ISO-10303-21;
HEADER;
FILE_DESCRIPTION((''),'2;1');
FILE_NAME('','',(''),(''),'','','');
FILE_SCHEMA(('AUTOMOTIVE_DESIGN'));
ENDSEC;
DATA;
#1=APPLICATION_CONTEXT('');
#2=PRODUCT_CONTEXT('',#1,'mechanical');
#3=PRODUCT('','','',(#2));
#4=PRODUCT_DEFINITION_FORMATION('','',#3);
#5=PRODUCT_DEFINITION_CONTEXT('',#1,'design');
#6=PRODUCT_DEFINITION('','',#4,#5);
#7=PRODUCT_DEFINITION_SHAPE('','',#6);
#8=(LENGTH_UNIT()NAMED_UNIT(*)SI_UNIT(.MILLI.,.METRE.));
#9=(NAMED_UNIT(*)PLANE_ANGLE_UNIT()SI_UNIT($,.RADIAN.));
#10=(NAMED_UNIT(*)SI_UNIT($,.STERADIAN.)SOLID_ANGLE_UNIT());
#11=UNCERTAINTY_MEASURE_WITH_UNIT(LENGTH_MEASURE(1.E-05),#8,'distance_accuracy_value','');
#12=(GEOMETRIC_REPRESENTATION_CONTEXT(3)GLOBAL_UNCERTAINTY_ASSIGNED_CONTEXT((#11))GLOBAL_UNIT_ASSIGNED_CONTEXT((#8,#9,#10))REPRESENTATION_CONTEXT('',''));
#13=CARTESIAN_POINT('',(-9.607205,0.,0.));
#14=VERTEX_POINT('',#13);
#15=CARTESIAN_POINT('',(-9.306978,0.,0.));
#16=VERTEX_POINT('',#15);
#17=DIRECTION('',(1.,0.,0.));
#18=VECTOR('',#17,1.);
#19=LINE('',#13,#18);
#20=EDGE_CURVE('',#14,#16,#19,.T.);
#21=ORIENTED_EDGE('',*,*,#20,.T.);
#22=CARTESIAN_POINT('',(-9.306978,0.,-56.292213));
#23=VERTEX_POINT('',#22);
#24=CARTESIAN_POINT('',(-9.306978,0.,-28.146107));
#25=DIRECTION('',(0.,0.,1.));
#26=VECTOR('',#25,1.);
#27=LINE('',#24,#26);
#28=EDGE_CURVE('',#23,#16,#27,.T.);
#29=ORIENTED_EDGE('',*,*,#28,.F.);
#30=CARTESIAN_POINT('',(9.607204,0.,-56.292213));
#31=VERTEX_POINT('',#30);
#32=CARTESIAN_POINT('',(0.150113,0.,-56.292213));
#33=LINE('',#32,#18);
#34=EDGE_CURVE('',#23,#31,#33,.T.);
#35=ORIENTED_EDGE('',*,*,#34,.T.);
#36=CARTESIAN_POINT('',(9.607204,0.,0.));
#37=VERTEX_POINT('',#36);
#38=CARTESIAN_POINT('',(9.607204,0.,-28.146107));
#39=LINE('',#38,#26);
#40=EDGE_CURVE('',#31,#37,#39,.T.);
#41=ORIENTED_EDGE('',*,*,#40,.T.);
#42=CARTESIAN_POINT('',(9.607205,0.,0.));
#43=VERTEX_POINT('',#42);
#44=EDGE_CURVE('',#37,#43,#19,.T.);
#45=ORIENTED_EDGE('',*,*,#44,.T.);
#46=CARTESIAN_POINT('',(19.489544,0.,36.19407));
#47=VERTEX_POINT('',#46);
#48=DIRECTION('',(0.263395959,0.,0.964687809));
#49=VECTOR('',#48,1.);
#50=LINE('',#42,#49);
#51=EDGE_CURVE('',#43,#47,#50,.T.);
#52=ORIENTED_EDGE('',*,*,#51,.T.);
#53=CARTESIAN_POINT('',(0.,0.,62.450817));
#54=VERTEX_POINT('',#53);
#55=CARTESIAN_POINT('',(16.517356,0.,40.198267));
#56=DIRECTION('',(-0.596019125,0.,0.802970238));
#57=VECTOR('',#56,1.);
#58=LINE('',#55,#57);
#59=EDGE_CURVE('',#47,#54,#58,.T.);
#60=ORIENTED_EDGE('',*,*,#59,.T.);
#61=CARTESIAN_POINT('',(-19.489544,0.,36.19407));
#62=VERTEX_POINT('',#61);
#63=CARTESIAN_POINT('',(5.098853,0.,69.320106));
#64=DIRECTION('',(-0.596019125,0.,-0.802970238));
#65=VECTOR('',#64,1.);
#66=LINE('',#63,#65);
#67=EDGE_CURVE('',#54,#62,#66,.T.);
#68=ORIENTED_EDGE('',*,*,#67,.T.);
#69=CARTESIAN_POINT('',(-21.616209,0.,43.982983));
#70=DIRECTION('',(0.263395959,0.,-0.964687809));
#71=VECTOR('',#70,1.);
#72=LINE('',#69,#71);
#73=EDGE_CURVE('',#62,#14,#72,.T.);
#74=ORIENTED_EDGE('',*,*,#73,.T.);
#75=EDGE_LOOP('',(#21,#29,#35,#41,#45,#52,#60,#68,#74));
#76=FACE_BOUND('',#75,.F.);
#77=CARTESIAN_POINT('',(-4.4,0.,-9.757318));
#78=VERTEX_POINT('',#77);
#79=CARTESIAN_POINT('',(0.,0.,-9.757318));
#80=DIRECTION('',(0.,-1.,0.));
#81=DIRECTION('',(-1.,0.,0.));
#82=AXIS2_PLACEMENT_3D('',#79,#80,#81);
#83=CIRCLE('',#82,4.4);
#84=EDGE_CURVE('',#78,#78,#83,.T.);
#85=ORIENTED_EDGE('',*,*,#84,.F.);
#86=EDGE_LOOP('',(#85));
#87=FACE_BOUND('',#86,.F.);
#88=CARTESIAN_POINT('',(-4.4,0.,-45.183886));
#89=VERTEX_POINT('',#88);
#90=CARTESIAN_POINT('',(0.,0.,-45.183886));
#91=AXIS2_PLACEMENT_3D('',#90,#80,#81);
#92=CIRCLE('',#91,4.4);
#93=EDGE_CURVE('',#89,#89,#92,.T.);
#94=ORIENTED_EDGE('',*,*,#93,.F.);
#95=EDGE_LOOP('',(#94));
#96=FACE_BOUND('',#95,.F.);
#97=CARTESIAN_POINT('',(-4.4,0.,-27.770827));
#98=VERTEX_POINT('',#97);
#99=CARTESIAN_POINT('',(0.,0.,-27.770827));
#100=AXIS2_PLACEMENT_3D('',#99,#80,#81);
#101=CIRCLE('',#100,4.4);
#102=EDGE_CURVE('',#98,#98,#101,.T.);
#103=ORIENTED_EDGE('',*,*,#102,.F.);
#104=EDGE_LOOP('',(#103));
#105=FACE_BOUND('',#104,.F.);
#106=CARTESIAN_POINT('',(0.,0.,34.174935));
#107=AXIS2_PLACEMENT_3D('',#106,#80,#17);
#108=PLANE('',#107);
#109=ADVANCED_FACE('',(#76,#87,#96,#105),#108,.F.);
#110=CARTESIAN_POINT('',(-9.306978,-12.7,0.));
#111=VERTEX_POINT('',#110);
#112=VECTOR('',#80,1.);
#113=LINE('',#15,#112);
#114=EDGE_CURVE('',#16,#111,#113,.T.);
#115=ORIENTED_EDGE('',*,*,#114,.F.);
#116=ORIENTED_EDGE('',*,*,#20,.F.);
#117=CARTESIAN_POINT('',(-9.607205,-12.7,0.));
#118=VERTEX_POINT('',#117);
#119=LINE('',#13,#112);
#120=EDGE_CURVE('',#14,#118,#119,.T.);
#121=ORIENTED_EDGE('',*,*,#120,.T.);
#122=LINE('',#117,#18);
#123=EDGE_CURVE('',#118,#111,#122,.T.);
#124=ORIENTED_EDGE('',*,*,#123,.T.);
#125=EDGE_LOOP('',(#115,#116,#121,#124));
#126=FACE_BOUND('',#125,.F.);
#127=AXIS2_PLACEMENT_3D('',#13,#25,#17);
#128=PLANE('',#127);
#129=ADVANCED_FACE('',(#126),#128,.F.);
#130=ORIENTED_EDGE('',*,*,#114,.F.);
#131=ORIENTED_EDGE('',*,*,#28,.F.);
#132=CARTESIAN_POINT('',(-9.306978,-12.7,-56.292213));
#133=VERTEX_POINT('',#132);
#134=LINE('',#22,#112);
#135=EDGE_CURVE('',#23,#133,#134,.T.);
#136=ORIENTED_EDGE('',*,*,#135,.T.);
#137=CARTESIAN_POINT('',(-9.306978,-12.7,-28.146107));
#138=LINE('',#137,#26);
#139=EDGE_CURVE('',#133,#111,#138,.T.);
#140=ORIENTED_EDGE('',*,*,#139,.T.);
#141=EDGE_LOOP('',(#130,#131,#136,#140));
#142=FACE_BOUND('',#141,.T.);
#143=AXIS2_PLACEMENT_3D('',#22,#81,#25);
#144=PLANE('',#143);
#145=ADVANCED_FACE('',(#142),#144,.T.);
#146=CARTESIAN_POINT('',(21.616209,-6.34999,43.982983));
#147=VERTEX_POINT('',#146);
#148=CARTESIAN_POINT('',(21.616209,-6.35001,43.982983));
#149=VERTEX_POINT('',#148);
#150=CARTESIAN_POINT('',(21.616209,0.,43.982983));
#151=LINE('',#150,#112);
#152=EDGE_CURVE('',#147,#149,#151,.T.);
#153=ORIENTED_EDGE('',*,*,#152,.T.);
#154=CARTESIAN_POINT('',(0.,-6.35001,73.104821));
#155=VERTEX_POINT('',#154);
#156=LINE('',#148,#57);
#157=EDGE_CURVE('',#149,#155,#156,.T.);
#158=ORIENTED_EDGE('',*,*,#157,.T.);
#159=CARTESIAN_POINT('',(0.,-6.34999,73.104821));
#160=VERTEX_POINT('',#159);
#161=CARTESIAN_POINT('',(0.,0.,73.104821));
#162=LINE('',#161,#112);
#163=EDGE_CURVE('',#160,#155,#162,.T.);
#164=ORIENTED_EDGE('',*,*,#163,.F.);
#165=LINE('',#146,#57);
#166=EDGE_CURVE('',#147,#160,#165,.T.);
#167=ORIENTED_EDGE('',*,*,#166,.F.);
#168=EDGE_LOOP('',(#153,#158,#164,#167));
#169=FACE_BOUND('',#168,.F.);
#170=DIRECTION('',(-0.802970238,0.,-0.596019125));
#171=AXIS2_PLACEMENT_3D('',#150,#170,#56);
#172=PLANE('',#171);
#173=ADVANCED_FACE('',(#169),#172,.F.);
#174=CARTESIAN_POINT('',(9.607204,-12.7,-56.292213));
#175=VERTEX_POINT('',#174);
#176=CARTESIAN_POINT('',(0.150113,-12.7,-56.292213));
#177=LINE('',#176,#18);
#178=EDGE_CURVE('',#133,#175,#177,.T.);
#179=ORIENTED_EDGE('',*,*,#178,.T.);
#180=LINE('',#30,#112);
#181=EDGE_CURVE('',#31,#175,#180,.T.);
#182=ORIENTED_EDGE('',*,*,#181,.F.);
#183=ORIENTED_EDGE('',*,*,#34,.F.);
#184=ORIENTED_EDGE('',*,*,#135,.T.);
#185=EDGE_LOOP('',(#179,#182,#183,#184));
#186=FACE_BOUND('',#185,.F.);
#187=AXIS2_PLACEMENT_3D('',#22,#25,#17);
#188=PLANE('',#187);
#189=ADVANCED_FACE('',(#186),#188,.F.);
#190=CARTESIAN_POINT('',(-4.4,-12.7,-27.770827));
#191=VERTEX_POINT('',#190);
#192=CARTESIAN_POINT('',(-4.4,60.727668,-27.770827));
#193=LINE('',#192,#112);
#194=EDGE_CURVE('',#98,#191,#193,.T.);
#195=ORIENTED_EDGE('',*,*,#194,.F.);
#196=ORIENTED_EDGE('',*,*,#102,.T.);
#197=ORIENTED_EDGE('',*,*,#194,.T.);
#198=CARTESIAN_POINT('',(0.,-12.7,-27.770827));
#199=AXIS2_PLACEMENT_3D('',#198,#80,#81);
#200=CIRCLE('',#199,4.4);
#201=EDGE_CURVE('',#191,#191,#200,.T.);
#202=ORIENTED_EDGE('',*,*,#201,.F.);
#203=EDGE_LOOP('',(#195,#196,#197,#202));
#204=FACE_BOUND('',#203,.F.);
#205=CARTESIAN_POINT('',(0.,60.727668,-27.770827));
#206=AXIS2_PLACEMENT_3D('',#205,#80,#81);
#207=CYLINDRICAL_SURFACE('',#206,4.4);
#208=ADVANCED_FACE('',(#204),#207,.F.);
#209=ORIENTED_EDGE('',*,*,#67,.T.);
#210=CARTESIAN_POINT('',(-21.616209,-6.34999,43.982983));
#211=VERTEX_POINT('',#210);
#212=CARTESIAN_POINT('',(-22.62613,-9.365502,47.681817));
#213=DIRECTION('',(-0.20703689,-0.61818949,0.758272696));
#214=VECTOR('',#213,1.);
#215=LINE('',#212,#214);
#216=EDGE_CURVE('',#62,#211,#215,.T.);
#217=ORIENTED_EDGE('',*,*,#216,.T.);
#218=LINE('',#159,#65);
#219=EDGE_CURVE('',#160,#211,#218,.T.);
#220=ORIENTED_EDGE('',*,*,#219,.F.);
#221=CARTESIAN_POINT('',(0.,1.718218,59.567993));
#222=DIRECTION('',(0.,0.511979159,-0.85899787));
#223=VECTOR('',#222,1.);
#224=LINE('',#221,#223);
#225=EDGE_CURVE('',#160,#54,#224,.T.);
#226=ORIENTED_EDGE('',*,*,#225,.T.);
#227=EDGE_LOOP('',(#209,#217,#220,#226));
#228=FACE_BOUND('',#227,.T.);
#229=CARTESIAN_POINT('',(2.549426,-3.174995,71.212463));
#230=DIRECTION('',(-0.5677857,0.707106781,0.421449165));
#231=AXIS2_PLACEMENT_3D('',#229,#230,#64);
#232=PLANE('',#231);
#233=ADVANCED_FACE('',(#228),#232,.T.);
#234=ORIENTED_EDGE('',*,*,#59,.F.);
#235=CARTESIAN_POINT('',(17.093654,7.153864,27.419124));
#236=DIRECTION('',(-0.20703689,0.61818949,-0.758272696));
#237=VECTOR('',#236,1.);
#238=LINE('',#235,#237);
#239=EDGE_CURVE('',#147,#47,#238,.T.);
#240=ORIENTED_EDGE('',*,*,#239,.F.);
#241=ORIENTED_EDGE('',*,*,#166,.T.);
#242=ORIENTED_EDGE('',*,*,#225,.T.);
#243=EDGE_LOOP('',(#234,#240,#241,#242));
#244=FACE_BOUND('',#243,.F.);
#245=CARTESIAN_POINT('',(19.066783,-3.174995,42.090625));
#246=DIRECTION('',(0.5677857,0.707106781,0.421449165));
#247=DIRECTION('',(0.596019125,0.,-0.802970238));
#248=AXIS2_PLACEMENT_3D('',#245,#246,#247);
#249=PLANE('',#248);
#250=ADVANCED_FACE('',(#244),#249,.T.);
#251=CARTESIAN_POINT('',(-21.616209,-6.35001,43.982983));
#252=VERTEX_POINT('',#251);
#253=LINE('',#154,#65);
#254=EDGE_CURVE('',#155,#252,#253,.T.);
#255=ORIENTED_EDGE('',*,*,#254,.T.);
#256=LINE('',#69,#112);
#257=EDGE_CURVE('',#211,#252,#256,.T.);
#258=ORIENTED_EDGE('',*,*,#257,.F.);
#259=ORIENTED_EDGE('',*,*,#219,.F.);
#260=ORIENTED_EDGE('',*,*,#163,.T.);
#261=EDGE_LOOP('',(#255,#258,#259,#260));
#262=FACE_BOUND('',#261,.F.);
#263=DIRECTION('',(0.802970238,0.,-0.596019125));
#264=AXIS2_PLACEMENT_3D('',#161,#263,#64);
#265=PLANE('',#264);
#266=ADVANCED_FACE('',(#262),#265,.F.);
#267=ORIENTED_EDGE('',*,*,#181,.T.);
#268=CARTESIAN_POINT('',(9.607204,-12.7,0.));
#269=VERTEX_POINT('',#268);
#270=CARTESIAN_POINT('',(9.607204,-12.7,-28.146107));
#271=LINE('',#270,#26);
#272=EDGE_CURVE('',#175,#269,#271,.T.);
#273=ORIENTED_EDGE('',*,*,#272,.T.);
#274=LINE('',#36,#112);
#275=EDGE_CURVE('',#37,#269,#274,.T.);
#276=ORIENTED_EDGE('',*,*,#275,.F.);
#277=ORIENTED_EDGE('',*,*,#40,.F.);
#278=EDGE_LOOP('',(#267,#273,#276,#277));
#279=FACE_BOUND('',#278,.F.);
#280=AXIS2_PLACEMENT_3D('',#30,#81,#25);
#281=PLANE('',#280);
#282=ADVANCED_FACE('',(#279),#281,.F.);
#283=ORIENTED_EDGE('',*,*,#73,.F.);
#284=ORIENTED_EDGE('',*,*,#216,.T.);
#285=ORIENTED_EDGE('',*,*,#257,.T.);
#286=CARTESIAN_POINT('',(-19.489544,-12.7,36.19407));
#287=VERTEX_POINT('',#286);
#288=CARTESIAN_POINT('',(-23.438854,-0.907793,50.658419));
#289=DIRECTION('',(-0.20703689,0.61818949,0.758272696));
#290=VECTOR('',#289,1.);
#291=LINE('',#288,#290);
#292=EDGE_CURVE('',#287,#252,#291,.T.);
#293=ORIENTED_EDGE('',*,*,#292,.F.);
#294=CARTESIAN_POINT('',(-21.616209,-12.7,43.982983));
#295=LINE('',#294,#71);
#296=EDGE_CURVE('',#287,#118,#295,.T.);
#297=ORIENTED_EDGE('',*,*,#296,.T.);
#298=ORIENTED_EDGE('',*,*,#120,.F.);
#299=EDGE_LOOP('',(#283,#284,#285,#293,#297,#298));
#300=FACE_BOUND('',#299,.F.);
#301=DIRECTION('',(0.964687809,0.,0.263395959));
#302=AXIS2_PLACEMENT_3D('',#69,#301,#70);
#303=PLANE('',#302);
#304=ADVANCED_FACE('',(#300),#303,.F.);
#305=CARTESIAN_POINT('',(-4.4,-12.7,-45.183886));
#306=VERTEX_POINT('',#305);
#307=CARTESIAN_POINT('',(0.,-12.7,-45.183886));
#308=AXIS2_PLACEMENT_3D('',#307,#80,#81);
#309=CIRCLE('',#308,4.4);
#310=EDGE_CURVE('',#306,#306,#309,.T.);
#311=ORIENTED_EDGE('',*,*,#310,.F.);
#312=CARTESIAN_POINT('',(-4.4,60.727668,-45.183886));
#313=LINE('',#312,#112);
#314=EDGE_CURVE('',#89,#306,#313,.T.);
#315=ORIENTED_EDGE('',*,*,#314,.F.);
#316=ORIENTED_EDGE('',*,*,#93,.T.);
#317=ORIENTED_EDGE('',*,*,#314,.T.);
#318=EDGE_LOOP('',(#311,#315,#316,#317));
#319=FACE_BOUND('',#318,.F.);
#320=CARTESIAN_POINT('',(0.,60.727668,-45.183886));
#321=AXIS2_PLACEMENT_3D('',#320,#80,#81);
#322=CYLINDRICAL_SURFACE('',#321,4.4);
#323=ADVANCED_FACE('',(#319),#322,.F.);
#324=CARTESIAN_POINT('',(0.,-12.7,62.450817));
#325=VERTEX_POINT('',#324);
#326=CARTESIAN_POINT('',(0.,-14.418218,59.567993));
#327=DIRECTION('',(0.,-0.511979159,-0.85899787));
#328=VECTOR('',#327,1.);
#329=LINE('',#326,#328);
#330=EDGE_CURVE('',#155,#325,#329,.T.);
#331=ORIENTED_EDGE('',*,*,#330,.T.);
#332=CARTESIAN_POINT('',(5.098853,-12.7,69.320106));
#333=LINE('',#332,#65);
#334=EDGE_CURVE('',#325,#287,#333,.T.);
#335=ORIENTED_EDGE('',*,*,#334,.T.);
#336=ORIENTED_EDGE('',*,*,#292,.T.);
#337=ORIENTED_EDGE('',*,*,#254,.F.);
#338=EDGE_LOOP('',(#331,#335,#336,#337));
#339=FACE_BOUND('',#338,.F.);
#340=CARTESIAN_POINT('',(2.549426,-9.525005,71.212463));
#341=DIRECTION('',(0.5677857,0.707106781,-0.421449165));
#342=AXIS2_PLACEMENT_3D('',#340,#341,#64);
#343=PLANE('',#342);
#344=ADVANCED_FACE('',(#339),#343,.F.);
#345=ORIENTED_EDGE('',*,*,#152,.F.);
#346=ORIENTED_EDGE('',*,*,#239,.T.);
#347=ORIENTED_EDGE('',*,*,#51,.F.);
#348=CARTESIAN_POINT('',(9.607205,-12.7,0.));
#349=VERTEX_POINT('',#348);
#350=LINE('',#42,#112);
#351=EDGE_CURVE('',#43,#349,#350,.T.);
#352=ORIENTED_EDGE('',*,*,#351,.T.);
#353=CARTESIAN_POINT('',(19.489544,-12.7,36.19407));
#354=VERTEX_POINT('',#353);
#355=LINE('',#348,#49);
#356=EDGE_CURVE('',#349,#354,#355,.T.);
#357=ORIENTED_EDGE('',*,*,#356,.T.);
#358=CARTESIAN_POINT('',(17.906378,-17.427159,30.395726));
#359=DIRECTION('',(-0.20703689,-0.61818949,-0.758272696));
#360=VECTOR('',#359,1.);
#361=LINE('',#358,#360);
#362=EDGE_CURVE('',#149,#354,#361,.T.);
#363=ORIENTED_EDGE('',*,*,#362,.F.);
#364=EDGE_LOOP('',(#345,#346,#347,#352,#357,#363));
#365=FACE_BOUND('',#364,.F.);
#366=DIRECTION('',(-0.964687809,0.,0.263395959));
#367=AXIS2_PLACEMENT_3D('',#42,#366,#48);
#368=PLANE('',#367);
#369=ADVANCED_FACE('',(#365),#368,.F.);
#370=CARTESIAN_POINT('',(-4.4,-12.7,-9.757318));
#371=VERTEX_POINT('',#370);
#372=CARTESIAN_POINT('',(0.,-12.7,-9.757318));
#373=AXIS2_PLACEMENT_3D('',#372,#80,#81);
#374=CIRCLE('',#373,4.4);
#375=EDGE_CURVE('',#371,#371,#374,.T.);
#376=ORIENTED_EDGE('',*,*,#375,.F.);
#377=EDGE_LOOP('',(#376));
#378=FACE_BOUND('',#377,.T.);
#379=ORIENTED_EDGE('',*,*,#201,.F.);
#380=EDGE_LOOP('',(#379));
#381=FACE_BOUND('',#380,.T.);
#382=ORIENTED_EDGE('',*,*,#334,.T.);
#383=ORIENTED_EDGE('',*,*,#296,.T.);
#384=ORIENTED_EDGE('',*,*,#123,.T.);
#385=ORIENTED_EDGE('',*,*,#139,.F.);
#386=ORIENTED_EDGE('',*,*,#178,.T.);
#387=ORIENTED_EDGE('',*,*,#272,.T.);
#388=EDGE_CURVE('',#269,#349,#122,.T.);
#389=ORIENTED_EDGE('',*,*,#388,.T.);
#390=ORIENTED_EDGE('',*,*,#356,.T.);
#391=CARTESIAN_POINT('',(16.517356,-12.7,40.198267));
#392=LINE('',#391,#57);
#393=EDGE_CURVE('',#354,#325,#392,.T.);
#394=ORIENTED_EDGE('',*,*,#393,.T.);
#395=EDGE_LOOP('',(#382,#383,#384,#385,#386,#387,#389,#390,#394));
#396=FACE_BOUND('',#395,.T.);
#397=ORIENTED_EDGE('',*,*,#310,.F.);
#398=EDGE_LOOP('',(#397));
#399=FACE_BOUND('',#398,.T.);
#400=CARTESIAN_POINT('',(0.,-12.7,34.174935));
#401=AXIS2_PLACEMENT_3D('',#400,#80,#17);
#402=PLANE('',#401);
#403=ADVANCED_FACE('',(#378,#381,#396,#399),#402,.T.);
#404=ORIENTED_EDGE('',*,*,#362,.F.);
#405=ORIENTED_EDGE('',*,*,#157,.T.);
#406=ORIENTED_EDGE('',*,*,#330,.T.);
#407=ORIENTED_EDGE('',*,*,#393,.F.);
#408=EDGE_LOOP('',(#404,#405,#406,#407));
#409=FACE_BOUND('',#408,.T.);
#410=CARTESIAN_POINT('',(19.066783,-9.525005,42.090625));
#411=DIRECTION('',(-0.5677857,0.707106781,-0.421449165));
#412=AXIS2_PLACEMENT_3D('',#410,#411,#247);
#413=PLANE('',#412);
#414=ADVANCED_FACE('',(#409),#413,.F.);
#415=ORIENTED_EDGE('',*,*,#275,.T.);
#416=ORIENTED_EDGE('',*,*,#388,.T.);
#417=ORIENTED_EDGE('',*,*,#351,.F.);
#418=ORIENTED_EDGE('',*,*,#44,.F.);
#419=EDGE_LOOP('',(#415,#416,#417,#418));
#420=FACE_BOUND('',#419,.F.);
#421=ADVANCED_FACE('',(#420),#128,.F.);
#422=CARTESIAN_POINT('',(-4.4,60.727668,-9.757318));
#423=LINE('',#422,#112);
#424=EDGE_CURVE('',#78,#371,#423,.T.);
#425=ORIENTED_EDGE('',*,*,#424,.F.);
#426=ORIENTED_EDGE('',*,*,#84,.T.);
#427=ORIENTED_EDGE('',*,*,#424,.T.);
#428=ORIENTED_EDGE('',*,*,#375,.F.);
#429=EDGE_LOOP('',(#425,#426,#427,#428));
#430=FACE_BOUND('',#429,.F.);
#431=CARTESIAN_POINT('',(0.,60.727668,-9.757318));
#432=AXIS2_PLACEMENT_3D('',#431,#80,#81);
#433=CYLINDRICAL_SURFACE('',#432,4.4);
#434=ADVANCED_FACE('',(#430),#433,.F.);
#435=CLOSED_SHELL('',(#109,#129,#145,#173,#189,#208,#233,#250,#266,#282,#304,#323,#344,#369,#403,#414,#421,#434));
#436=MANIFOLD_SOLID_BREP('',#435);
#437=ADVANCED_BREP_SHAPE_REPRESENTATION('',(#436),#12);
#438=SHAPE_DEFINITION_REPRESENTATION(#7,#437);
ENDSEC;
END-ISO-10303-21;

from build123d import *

# Parameters (mm, degrees)
F0_W     = 18.9141826704
F0_H     = 56.2922134995
F1_DEPTH = 12.7
F3_D     = 8.8
F5_DEPTH = 12.7
F6_SIZE  = 6.34999


# Not quite as in the source:
# - a fillet or chamfer is up to 0.001 mm smaller than in the source, because OpenCascade refuses the exact size


with BuildPart() as f1:
    # F0 (on Front) → F1 (new body)
    with BuildSketch(Plane.XZ):
        with Locations((0.1501129009, -28.1461067498)):
            Rectangle(F0_W, F0_H)
    extrude(amount=F1_DEPTH)

    # F3 (through all)
    with Locations(Plane(origin=(0, 0, 0), x_dir=(1, 0, 0), z_dir=(0, 1, 0))):
        with Locations((0, 9.7573176026), (0, 27.770826593), (0, 45.1838858426)):
            Hole(F3_D / 2)

    # F4 (on Front) → F5 (join)
    with BuildSketch(Plane.XZ):
        Polygon((0, 0), (9.6072051674, 0), (21.6162092984, 43.9829826355), (0, 73.1048211455), (-21.6162092984, 43.9829826355), (-9.6072051674, 0), align=None)
    extrude(amount=F5_DEPTH)

    # F6 (size 6.35 in the source; OpenCascade refuses exactly that, so slightly less here)
    f6_edges = [f1.edges().sort_by_distance(p)[0] for p in [
        (10.808105, 0, 58.543902),
        (-10.808105, 0, 58.543902),
        (10.808105, -12.7, 58.543902),
        (-10.808105, -12.7, 58.543902),
    ]]
    chamfer(f6_edges, length=F6_SIZE)


solid = f1.part
